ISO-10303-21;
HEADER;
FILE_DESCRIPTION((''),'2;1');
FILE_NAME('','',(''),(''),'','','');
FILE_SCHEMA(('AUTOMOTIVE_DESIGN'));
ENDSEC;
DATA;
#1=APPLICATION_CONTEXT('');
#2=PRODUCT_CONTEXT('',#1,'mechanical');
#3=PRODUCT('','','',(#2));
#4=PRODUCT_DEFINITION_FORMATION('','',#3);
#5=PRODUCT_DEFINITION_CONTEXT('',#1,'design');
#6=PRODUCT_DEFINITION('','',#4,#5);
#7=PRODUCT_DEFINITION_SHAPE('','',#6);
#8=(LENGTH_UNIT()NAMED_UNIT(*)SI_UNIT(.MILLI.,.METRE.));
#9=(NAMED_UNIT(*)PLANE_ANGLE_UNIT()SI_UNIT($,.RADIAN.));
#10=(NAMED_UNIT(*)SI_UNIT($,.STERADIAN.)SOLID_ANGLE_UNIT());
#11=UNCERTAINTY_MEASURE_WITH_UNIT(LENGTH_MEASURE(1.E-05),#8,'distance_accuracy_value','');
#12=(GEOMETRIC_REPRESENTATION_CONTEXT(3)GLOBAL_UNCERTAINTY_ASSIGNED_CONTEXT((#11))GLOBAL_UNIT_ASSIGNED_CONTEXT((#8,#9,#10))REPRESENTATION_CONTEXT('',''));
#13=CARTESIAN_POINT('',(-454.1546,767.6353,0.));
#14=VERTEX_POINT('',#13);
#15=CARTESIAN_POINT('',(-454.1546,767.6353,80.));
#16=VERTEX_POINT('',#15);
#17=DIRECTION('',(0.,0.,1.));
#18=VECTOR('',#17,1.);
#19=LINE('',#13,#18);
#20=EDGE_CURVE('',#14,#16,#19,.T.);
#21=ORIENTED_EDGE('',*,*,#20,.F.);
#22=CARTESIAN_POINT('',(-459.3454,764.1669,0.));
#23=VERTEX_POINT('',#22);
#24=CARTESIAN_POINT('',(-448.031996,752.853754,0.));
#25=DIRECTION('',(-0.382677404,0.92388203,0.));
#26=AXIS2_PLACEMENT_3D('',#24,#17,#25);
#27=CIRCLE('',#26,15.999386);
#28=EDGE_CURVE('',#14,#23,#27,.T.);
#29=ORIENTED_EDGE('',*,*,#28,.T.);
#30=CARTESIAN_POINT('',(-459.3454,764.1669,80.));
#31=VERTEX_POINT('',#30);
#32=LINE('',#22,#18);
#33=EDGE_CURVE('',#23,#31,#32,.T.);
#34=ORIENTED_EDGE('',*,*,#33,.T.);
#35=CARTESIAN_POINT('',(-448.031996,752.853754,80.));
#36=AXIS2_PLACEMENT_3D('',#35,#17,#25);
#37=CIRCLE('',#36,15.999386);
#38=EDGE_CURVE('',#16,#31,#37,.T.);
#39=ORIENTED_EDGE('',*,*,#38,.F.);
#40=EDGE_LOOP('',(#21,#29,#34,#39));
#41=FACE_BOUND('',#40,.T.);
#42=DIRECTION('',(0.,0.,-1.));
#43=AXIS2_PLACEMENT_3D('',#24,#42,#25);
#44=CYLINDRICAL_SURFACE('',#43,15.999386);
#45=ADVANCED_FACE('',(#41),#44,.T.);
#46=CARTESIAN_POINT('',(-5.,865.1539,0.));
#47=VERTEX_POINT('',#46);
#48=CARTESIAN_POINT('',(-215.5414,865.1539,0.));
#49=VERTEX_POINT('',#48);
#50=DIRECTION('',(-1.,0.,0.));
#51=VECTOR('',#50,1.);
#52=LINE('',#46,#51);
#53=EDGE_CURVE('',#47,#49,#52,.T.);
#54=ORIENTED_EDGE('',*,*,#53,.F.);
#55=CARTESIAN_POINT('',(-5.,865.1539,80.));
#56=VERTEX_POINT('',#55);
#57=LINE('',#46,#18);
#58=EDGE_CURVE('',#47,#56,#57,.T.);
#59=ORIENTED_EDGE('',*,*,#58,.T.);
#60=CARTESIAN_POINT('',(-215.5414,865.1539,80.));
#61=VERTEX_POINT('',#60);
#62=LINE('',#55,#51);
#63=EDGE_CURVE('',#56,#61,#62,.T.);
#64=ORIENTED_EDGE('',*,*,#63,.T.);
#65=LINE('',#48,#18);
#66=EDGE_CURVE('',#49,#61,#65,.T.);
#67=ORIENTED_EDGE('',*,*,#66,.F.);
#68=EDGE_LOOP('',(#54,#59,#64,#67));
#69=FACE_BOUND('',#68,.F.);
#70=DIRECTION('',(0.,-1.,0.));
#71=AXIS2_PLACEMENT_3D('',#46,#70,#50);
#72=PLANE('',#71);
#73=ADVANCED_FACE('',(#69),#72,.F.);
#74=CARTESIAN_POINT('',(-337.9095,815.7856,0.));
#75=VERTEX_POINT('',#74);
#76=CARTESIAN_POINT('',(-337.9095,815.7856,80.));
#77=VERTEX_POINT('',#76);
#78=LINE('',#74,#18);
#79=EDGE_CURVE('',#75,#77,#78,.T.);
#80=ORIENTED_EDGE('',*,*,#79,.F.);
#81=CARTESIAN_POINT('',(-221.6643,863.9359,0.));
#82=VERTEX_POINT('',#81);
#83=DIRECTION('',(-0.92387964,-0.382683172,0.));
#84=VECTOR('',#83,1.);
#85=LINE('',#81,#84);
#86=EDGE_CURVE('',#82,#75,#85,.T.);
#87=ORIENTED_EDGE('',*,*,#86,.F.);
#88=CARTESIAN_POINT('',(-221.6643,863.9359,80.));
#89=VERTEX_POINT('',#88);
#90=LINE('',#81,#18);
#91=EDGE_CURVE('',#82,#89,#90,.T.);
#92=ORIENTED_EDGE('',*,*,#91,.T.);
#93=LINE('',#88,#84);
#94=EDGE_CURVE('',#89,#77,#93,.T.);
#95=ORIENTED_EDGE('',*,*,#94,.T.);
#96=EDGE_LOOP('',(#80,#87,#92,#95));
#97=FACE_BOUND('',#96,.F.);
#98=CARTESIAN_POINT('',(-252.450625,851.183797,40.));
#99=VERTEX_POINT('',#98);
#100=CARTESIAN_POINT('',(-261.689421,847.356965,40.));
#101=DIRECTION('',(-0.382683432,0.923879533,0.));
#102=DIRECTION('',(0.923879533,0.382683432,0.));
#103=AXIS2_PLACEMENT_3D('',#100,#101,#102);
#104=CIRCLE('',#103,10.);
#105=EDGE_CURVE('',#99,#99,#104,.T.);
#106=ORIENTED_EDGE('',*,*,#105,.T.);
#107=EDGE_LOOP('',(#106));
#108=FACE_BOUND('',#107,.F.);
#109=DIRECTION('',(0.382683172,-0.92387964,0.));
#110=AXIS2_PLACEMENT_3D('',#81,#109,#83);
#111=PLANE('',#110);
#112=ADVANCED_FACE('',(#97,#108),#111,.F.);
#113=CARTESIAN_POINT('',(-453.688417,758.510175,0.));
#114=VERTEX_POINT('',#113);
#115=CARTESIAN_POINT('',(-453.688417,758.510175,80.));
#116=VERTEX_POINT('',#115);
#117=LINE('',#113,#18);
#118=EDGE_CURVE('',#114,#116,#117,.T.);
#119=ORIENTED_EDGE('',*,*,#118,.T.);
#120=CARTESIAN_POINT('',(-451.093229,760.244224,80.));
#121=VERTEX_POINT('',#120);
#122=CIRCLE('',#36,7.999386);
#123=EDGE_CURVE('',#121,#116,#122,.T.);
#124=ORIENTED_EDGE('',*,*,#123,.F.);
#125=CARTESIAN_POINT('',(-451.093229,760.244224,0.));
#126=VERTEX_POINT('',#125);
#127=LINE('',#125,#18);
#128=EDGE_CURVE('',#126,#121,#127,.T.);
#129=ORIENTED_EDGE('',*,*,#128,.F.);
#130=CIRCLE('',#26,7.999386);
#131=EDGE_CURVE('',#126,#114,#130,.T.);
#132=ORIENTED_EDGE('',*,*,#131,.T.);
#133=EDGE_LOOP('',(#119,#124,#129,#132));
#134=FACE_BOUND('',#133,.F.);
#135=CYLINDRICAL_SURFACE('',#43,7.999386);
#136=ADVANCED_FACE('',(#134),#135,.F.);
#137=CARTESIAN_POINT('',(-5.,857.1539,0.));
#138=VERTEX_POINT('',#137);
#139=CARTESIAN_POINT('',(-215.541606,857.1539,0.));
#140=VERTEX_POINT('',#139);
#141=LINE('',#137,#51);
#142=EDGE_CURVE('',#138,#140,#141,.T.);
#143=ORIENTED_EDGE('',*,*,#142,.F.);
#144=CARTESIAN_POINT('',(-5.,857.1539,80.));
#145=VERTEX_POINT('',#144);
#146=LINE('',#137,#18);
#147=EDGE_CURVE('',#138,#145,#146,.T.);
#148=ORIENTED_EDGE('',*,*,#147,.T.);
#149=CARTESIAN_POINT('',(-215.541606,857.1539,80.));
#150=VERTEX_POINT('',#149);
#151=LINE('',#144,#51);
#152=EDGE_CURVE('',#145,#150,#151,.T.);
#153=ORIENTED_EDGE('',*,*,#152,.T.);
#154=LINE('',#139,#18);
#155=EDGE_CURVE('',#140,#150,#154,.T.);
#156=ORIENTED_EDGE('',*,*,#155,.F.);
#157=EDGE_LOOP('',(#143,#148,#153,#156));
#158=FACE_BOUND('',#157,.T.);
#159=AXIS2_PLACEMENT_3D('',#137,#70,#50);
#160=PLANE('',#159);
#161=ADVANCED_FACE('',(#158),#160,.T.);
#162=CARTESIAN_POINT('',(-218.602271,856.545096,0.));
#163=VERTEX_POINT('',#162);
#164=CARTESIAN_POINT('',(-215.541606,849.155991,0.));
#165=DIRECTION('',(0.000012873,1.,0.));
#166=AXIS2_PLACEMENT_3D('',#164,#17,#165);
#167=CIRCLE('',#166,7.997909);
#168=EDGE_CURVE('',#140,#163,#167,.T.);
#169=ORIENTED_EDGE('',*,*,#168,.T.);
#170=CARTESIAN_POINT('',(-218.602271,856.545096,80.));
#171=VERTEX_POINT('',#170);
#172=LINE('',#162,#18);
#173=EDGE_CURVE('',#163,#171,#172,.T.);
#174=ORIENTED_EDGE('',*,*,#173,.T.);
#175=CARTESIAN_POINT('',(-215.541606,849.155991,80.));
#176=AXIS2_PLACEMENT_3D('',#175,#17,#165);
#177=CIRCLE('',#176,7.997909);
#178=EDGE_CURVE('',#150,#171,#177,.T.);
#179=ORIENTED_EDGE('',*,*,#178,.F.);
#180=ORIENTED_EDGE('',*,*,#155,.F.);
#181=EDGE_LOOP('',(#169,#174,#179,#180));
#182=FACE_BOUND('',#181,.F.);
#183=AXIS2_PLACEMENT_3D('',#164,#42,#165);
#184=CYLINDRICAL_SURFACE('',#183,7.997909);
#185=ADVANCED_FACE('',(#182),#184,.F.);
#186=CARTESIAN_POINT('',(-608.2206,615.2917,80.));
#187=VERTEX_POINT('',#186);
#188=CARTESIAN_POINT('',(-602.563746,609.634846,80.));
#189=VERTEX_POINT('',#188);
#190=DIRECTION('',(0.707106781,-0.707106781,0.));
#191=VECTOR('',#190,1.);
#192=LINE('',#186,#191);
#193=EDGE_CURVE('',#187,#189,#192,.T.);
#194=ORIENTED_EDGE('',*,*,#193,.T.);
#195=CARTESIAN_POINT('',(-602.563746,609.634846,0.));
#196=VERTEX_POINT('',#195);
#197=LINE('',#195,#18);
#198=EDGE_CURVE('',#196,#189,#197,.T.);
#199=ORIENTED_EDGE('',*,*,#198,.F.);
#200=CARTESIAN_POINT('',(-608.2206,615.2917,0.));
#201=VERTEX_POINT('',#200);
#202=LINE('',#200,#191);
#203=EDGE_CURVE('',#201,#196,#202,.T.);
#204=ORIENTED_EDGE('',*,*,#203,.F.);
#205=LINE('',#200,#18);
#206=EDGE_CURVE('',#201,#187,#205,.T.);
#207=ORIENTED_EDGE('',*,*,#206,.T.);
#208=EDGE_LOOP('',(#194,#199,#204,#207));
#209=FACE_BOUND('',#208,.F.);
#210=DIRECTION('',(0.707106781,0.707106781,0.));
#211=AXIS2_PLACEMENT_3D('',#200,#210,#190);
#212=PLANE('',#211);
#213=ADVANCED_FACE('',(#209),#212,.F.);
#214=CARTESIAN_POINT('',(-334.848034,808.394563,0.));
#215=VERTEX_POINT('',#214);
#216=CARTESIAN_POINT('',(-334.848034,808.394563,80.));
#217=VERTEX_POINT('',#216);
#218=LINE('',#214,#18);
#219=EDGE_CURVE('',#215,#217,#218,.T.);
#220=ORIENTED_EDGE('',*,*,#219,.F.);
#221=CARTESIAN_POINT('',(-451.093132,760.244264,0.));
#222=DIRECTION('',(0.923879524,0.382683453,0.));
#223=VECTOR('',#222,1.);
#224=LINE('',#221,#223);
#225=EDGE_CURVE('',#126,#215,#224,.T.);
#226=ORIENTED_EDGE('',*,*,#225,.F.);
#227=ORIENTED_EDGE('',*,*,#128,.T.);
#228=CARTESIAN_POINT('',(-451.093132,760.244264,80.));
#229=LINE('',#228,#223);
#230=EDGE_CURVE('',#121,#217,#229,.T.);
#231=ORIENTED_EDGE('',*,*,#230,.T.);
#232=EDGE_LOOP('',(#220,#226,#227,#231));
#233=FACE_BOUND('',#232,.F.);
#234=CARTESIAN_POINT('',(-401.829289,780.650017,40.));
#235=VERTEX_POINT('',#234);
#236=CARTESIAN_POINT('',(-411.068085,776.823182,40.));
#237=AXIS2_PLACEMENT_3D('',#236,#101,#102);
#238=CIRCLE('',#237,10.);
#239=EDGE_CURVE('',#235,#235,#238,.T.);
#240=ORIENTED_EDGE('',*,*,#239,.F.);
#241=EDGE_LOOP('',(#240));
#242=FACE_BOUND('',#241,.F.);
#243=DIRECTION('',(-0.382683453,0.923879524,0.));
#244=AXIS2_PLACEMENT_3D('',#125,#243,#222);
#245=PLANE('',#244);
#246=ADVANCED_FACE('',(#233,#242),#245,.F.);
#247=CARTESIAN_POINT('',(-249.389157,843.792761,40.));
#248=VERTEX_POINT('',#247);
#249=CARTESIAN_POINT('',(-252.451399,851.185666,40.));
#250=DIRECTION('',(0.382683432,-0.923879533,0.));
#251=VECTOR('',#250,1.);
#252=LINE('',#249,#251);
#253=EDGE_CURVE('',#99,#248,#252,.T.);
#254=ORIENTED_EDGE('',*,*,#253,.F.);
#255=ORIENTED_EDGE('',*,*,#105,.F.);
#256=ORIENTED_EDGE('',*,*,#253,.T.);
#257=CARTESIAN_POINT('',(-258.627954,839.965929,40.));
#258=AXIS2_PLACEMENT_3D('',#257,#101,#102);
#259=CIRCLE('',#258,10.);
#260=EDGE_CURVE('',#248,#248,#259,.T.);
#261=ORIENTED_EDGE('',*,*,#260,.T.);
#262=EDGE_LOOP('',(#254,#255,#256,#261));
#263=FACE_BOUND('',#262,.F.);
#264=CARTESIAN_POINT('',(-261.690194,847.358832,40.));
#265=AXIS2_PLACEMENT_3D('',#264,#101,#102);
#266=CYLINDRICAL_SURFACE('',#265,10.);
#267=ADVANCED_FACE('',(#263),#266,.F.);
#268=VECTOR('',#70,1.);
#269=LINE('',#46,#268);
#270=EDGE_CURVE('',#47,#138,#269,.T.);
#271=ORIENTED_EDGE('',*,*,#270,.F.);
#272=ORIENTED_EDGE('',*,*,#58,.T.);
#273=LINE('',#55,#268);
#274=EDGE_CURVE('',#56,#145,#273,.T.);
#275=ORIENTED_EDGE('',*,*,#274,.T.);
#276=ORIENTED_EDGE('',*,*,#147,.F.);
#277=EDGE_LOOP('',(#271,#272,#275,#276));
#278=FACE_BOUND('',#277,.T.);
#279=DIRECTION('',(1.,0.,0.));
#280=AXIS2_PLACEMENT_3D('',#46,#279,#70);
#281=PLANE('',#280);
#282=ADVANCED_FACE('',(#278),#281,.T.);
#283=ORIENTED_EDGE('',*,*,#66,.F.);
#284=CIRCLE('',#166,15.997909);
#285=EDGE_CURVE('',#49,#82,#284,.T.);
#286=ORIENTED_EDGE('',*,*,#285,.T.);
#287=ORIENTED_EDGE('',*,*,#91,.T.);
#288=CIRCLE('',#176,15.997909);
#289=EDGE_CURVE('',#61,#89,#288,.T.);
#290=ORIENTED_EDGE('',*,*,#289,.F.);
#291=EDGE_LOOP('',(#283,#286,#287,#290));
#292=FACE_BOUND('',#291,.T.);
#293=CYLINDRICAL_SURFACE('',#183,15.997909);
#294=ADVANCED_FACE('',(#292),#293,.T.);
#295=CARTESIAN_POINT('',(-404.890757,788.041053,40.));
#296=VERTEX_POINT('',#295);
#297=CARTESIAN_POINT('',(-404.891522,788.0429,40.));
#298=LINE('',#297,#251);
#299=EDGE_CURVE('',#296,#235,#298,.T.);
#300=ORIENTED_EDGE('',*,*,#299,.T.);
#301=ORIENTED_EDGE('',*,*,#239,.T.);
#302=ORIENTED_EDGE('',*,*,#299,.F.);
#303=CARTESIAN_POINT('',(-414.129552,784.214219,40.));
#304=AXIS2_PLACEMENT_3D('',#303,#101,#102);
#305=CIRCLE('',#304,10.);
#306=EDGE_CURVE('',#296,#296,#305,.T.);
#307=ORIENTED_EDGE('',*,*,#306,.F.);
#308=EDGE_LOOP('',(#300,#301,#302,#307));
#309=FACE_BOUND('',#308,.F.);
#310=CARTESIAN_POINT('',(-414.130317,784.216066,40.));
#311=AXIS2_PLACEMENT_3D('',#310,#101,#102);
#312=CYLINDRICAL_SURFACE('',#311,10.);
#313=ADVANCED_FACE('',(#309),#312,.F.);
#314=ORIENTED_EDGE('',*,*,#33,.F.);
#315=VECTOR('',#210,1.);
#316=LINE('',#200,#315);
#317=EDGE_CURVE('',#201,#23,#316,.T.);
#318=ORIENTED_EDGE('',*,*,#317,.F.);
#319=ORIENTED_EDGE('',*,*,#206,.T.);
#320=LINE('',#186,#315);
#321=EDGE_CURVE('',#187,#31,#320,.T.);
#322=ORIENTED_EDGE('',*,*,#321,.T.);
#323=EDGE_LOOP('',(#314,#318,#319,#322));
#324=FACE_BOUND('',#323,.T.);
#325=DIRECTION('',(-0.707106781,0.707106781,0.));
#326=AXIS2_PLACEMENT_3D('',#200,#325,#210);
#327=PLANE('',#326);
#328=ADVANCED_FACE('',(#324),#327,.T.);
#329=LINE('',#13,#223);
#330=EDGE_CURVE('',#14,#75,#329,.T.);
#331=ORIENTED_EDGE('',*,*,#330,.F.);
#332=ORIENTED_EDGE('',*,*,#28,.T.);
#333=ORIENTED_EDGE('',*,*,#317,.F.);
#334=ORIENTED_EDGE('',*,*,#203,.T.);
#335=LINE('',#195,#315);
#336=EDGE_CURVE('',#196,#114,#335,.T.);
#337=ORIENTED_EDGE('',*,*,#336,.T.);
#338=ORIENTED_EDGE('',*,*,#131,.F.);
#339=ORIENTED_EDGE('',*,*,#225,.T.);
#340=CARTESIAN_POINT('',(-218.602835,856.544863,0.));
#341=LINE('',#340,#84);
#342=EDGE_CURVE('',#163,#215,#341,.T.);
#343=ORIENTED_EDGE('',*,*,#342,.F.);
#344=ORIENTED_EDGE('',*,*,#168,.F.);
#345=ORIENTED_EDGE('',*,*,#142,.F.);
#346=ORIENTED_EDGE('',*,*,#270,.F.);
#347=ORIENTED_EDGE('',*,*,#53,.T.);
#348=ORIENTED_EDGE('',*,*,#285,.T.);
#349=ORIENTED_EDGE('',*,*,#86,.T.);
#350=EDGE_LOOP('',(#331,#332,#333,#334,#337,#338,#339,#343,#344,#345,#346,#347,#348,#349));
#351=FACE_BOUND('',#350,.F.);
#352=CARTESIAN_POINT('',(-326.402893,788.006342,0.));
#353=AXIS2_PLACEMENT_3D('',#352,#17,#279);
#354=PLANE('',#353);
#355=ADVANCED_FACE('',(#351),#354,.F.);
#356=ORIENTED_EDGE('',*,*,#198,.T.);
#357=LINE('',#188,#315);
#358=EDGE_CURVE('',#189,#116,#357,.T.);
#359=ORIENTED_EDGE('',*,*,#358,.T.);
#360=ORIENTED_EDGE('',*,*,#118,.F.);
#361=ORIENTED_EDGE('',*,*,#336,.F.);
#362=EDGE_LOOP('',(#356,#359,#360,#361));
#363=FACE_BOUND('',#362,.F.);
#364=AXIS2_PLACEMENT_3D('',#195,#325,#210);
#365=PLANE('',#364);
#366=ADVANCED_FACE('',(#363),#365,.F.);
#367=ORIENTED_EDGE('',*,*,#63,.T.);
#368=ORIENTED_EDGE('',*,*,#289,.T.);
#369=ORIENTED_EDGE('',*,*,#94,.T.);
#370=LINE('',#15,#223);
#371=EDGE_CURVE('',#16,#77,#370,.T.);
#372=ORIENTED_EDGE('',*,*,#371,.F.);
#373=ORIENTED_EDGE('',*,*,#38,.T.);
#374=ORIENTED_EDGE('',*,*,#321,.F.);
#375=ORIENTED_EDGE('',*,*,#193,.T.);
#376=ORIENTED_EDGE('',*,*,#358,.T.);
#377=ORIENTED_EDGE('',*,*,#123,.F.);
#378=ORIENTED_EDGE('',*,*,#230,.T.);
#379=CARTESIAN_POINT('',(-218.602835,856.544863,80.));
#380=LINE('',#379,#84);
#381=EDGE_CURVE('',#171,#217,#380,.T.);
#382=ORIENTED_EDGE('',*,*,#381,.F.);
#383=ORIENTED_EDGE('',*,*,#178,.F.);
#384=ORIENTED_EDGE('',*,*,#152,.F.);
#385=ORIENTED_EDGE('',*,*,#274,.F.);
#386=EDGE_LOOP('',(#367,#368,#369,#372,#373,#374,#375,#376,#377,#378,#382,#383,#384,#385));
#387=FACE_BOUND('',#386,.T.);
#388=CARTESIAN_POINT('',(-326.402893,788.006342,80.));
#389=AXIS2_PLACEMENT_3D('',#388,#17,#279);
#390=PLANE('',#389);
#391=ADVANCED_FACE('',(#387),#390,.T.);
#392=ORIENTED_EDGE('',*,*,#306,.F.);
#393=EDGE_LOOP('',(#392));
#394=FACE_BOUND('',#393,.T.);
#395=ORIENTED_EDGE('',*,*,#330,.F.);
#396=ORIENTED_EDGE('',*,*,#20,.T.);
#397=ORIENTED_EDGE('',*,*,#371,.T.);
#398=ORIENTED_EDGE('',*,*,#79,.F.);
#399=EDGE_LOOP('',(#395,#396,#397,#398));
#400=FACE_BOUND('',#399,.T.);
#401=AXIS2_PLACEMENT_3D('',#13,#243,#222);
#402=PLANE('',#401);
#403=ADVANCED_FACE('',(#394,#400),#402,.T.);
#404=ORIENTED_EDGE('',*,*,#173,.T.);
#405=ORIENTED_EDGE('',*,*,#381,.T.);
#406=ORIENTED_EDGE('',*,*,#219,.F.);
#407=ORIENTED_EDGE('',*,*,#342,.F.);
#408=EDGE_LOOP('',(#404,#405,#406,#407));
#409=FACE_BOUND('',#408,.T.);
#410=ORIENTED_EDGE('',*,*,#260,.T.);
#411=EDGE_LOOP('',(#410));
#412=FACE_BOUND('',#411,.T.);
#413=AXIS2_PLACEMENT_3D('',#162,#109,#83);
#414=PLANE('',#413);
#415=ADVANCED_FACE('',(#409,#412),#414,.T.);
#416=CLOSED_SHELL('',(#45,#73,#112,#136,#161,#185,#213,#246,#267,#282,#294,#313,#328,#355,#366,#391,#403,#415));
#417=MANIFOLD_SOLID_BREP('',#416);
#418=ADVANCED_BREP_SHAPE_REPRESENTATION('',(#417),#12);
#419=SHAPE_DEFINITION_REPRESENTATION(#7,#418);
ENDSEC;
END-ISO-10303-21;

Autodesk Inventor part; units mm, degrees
ref_plane "YZ Plane" through (0, 0, 0) normal (1, 0, 0) x (0, 1, 0)
ref_plane "XZ Plane" through (0, 0, 0) normal (0, 1, 0) x (-1, 0, 0)
ref_plane "XY Plane" through (0, 0, 0) normal (0, 0, 1) x (1, 0, 0)
sketch "Sketch2" plane through (0, 0, 0) normal (0, 0, 1) x (1, 0, 0)
  line L0 (0, 273.8452) -> (193.6378, 193.6378) construction
  line L1 (193.6378, 193.6378) -> (273.8452, 0) construction
  line L2 (273.8452, 0) -> (193.6378, -193.6378) construction
  line L3 (193.6378, -193.6378) -> (0, -273.8452) construction
  line L4 (0, -273.8452) -> (-193.6378, -193.6378) construction
  line L5 (-193.6378, -193.6378) -> (-273.8452, 0) construction
  line L6 (-273.8452, 0) -> (-193.6378, 193.6378) construction
  line L7 (-193.6378, 193.6378) -> (0, 273.8452) construction
  line L8 (-193.6378, 193.6378) -> (0, 273.8452) construction
  line L9 (-459.9272, 770.6562) -> (-219.7185, 870.1539) construction
  line L10 (-96.8189, 233.7415) -> (-339.8229, 820.405) construction
  line L11 (-219.7185, 870.1539) -> (0, 870.1539) construction
  line L12 (0, 870.1539) -> (0, 273.8452) construction
  line L13 (-459.9272, 770.6562) -> (-615.2917, 615.2917) construction
  line L14 (-615.2917, 615.2917) -> (-193.6378, 193.6378) construction
  line L15 (-221.6643, 863.9359) -> (-337.9095, 815.7856)
  line L16 (-5, 865.1539) -> (-215.5414, 865.1539)
  line L17 (-454.1546, 767.6353) -> (-337.9095, 815.7856)
  line L18 (-608.2206, 615.2917) -> (-459.3454, 764.1669)
  arc A0 (-215.5414, 865.1539) -> (-221.6643, 863.9359) centre (-215.5414, 849.1539) ccw
  arc A1 (-454.1546, 767.6353) -> (-459.3454, 764.1669) centre (-448.0317, 752.8532) ccw
  point P0 (0, 0)
  point P1 (0, 0)
  point P2 (0, 0)
  point P3 (-218.724, 865.1539)
  point P4 (-457.095, 766.4174)
  dimension "d0" = 506
  dimension "d1" = 260
  dimension "d2" = 635
  dimension "d6" = 5
  dimension "d10" = 5
  dimension "d14" = 5
  dimension "d15" = 16
contour flange "Contour Flange1" sketch "Sketch2" thickness 8 bend radius 8 width 80 along (0, 0, 1) mid plane no both sides no wall seen from (-110.2707, 865.1539, 0) lies toward (0, -1, 0) curves L16 A0 L15 L17 A1 L18
bend "Bend1"
corner "Corner1"
sketch "Sketch3" plane through (-454.1546, 767.6353, 80) normal (-0.3826834, 0.9238795, 0) x (0.9238795, 0.3826834, 0)
  line L0 (125.8228, 80) -> (125.8228, 0) construction
  line L1 (0, 0) -> (251.6457, 0) projected
  circle A0 centre (43.3228, 40) radius 10
  circle A1 centre (208.3228, 40) radius 10
  point P0 (125.8228, 40)
  dimension "d27" = 20
  dimension "d28" = 82.5
extrude "Extrusion1" cut sketch "Sketch3" against normal up to surface (8 mm away)
equation "\"d0\" = Барабан_габарит_по_кассетам"
equation "\"d1\" = Кассета_длина_грани"
equation "\"d2\" = Кассета_высота"
equation "\"d10\" = d6"
equation "\"d15\" = BendRadius + Thickness"
equation "\"d16\" = Thickness"
equation "\"d17\" = BendReliefWidth"
equation "\"d18\" = BendReliefDepth"
equation "\"d19\" = MinimumRemnant"
equation "\"d20\" = TransitionRadius"
equation "\"d22\" = BendRadius"
equation "\"d24\" = CornerReliefSize"
equation "\"d25\" = GapSize"
equation "\"d26\" = JacobiRadiusSize"
equation "\"BendRadius\" = Thickness"
equation "\"BendReliefWidth\" = Thickness"
equation "\"BendReliefDepth\" = 0.5 * Thickness"
equation "\"CornerReliefSize\" = 4 * Thickness"
equation "\"MinimumRemnant\" = 2 * Thickness"
equation "\"TransitionRadius\" = BendRadius"
equation "\"JacobiRadiusSize\" = BendRadius"
equation "\"GapSize\" = Thickness"
equation "\"Барабан_габарит_по_кассетам\" = 506"
equation "\"Кассета_длина_грани\" = 260"
equation "\"Кассета_высота\" = 635"
equation "\"Thickness\" = 8"
properties part number "ДМС 202 Верхний лист"
